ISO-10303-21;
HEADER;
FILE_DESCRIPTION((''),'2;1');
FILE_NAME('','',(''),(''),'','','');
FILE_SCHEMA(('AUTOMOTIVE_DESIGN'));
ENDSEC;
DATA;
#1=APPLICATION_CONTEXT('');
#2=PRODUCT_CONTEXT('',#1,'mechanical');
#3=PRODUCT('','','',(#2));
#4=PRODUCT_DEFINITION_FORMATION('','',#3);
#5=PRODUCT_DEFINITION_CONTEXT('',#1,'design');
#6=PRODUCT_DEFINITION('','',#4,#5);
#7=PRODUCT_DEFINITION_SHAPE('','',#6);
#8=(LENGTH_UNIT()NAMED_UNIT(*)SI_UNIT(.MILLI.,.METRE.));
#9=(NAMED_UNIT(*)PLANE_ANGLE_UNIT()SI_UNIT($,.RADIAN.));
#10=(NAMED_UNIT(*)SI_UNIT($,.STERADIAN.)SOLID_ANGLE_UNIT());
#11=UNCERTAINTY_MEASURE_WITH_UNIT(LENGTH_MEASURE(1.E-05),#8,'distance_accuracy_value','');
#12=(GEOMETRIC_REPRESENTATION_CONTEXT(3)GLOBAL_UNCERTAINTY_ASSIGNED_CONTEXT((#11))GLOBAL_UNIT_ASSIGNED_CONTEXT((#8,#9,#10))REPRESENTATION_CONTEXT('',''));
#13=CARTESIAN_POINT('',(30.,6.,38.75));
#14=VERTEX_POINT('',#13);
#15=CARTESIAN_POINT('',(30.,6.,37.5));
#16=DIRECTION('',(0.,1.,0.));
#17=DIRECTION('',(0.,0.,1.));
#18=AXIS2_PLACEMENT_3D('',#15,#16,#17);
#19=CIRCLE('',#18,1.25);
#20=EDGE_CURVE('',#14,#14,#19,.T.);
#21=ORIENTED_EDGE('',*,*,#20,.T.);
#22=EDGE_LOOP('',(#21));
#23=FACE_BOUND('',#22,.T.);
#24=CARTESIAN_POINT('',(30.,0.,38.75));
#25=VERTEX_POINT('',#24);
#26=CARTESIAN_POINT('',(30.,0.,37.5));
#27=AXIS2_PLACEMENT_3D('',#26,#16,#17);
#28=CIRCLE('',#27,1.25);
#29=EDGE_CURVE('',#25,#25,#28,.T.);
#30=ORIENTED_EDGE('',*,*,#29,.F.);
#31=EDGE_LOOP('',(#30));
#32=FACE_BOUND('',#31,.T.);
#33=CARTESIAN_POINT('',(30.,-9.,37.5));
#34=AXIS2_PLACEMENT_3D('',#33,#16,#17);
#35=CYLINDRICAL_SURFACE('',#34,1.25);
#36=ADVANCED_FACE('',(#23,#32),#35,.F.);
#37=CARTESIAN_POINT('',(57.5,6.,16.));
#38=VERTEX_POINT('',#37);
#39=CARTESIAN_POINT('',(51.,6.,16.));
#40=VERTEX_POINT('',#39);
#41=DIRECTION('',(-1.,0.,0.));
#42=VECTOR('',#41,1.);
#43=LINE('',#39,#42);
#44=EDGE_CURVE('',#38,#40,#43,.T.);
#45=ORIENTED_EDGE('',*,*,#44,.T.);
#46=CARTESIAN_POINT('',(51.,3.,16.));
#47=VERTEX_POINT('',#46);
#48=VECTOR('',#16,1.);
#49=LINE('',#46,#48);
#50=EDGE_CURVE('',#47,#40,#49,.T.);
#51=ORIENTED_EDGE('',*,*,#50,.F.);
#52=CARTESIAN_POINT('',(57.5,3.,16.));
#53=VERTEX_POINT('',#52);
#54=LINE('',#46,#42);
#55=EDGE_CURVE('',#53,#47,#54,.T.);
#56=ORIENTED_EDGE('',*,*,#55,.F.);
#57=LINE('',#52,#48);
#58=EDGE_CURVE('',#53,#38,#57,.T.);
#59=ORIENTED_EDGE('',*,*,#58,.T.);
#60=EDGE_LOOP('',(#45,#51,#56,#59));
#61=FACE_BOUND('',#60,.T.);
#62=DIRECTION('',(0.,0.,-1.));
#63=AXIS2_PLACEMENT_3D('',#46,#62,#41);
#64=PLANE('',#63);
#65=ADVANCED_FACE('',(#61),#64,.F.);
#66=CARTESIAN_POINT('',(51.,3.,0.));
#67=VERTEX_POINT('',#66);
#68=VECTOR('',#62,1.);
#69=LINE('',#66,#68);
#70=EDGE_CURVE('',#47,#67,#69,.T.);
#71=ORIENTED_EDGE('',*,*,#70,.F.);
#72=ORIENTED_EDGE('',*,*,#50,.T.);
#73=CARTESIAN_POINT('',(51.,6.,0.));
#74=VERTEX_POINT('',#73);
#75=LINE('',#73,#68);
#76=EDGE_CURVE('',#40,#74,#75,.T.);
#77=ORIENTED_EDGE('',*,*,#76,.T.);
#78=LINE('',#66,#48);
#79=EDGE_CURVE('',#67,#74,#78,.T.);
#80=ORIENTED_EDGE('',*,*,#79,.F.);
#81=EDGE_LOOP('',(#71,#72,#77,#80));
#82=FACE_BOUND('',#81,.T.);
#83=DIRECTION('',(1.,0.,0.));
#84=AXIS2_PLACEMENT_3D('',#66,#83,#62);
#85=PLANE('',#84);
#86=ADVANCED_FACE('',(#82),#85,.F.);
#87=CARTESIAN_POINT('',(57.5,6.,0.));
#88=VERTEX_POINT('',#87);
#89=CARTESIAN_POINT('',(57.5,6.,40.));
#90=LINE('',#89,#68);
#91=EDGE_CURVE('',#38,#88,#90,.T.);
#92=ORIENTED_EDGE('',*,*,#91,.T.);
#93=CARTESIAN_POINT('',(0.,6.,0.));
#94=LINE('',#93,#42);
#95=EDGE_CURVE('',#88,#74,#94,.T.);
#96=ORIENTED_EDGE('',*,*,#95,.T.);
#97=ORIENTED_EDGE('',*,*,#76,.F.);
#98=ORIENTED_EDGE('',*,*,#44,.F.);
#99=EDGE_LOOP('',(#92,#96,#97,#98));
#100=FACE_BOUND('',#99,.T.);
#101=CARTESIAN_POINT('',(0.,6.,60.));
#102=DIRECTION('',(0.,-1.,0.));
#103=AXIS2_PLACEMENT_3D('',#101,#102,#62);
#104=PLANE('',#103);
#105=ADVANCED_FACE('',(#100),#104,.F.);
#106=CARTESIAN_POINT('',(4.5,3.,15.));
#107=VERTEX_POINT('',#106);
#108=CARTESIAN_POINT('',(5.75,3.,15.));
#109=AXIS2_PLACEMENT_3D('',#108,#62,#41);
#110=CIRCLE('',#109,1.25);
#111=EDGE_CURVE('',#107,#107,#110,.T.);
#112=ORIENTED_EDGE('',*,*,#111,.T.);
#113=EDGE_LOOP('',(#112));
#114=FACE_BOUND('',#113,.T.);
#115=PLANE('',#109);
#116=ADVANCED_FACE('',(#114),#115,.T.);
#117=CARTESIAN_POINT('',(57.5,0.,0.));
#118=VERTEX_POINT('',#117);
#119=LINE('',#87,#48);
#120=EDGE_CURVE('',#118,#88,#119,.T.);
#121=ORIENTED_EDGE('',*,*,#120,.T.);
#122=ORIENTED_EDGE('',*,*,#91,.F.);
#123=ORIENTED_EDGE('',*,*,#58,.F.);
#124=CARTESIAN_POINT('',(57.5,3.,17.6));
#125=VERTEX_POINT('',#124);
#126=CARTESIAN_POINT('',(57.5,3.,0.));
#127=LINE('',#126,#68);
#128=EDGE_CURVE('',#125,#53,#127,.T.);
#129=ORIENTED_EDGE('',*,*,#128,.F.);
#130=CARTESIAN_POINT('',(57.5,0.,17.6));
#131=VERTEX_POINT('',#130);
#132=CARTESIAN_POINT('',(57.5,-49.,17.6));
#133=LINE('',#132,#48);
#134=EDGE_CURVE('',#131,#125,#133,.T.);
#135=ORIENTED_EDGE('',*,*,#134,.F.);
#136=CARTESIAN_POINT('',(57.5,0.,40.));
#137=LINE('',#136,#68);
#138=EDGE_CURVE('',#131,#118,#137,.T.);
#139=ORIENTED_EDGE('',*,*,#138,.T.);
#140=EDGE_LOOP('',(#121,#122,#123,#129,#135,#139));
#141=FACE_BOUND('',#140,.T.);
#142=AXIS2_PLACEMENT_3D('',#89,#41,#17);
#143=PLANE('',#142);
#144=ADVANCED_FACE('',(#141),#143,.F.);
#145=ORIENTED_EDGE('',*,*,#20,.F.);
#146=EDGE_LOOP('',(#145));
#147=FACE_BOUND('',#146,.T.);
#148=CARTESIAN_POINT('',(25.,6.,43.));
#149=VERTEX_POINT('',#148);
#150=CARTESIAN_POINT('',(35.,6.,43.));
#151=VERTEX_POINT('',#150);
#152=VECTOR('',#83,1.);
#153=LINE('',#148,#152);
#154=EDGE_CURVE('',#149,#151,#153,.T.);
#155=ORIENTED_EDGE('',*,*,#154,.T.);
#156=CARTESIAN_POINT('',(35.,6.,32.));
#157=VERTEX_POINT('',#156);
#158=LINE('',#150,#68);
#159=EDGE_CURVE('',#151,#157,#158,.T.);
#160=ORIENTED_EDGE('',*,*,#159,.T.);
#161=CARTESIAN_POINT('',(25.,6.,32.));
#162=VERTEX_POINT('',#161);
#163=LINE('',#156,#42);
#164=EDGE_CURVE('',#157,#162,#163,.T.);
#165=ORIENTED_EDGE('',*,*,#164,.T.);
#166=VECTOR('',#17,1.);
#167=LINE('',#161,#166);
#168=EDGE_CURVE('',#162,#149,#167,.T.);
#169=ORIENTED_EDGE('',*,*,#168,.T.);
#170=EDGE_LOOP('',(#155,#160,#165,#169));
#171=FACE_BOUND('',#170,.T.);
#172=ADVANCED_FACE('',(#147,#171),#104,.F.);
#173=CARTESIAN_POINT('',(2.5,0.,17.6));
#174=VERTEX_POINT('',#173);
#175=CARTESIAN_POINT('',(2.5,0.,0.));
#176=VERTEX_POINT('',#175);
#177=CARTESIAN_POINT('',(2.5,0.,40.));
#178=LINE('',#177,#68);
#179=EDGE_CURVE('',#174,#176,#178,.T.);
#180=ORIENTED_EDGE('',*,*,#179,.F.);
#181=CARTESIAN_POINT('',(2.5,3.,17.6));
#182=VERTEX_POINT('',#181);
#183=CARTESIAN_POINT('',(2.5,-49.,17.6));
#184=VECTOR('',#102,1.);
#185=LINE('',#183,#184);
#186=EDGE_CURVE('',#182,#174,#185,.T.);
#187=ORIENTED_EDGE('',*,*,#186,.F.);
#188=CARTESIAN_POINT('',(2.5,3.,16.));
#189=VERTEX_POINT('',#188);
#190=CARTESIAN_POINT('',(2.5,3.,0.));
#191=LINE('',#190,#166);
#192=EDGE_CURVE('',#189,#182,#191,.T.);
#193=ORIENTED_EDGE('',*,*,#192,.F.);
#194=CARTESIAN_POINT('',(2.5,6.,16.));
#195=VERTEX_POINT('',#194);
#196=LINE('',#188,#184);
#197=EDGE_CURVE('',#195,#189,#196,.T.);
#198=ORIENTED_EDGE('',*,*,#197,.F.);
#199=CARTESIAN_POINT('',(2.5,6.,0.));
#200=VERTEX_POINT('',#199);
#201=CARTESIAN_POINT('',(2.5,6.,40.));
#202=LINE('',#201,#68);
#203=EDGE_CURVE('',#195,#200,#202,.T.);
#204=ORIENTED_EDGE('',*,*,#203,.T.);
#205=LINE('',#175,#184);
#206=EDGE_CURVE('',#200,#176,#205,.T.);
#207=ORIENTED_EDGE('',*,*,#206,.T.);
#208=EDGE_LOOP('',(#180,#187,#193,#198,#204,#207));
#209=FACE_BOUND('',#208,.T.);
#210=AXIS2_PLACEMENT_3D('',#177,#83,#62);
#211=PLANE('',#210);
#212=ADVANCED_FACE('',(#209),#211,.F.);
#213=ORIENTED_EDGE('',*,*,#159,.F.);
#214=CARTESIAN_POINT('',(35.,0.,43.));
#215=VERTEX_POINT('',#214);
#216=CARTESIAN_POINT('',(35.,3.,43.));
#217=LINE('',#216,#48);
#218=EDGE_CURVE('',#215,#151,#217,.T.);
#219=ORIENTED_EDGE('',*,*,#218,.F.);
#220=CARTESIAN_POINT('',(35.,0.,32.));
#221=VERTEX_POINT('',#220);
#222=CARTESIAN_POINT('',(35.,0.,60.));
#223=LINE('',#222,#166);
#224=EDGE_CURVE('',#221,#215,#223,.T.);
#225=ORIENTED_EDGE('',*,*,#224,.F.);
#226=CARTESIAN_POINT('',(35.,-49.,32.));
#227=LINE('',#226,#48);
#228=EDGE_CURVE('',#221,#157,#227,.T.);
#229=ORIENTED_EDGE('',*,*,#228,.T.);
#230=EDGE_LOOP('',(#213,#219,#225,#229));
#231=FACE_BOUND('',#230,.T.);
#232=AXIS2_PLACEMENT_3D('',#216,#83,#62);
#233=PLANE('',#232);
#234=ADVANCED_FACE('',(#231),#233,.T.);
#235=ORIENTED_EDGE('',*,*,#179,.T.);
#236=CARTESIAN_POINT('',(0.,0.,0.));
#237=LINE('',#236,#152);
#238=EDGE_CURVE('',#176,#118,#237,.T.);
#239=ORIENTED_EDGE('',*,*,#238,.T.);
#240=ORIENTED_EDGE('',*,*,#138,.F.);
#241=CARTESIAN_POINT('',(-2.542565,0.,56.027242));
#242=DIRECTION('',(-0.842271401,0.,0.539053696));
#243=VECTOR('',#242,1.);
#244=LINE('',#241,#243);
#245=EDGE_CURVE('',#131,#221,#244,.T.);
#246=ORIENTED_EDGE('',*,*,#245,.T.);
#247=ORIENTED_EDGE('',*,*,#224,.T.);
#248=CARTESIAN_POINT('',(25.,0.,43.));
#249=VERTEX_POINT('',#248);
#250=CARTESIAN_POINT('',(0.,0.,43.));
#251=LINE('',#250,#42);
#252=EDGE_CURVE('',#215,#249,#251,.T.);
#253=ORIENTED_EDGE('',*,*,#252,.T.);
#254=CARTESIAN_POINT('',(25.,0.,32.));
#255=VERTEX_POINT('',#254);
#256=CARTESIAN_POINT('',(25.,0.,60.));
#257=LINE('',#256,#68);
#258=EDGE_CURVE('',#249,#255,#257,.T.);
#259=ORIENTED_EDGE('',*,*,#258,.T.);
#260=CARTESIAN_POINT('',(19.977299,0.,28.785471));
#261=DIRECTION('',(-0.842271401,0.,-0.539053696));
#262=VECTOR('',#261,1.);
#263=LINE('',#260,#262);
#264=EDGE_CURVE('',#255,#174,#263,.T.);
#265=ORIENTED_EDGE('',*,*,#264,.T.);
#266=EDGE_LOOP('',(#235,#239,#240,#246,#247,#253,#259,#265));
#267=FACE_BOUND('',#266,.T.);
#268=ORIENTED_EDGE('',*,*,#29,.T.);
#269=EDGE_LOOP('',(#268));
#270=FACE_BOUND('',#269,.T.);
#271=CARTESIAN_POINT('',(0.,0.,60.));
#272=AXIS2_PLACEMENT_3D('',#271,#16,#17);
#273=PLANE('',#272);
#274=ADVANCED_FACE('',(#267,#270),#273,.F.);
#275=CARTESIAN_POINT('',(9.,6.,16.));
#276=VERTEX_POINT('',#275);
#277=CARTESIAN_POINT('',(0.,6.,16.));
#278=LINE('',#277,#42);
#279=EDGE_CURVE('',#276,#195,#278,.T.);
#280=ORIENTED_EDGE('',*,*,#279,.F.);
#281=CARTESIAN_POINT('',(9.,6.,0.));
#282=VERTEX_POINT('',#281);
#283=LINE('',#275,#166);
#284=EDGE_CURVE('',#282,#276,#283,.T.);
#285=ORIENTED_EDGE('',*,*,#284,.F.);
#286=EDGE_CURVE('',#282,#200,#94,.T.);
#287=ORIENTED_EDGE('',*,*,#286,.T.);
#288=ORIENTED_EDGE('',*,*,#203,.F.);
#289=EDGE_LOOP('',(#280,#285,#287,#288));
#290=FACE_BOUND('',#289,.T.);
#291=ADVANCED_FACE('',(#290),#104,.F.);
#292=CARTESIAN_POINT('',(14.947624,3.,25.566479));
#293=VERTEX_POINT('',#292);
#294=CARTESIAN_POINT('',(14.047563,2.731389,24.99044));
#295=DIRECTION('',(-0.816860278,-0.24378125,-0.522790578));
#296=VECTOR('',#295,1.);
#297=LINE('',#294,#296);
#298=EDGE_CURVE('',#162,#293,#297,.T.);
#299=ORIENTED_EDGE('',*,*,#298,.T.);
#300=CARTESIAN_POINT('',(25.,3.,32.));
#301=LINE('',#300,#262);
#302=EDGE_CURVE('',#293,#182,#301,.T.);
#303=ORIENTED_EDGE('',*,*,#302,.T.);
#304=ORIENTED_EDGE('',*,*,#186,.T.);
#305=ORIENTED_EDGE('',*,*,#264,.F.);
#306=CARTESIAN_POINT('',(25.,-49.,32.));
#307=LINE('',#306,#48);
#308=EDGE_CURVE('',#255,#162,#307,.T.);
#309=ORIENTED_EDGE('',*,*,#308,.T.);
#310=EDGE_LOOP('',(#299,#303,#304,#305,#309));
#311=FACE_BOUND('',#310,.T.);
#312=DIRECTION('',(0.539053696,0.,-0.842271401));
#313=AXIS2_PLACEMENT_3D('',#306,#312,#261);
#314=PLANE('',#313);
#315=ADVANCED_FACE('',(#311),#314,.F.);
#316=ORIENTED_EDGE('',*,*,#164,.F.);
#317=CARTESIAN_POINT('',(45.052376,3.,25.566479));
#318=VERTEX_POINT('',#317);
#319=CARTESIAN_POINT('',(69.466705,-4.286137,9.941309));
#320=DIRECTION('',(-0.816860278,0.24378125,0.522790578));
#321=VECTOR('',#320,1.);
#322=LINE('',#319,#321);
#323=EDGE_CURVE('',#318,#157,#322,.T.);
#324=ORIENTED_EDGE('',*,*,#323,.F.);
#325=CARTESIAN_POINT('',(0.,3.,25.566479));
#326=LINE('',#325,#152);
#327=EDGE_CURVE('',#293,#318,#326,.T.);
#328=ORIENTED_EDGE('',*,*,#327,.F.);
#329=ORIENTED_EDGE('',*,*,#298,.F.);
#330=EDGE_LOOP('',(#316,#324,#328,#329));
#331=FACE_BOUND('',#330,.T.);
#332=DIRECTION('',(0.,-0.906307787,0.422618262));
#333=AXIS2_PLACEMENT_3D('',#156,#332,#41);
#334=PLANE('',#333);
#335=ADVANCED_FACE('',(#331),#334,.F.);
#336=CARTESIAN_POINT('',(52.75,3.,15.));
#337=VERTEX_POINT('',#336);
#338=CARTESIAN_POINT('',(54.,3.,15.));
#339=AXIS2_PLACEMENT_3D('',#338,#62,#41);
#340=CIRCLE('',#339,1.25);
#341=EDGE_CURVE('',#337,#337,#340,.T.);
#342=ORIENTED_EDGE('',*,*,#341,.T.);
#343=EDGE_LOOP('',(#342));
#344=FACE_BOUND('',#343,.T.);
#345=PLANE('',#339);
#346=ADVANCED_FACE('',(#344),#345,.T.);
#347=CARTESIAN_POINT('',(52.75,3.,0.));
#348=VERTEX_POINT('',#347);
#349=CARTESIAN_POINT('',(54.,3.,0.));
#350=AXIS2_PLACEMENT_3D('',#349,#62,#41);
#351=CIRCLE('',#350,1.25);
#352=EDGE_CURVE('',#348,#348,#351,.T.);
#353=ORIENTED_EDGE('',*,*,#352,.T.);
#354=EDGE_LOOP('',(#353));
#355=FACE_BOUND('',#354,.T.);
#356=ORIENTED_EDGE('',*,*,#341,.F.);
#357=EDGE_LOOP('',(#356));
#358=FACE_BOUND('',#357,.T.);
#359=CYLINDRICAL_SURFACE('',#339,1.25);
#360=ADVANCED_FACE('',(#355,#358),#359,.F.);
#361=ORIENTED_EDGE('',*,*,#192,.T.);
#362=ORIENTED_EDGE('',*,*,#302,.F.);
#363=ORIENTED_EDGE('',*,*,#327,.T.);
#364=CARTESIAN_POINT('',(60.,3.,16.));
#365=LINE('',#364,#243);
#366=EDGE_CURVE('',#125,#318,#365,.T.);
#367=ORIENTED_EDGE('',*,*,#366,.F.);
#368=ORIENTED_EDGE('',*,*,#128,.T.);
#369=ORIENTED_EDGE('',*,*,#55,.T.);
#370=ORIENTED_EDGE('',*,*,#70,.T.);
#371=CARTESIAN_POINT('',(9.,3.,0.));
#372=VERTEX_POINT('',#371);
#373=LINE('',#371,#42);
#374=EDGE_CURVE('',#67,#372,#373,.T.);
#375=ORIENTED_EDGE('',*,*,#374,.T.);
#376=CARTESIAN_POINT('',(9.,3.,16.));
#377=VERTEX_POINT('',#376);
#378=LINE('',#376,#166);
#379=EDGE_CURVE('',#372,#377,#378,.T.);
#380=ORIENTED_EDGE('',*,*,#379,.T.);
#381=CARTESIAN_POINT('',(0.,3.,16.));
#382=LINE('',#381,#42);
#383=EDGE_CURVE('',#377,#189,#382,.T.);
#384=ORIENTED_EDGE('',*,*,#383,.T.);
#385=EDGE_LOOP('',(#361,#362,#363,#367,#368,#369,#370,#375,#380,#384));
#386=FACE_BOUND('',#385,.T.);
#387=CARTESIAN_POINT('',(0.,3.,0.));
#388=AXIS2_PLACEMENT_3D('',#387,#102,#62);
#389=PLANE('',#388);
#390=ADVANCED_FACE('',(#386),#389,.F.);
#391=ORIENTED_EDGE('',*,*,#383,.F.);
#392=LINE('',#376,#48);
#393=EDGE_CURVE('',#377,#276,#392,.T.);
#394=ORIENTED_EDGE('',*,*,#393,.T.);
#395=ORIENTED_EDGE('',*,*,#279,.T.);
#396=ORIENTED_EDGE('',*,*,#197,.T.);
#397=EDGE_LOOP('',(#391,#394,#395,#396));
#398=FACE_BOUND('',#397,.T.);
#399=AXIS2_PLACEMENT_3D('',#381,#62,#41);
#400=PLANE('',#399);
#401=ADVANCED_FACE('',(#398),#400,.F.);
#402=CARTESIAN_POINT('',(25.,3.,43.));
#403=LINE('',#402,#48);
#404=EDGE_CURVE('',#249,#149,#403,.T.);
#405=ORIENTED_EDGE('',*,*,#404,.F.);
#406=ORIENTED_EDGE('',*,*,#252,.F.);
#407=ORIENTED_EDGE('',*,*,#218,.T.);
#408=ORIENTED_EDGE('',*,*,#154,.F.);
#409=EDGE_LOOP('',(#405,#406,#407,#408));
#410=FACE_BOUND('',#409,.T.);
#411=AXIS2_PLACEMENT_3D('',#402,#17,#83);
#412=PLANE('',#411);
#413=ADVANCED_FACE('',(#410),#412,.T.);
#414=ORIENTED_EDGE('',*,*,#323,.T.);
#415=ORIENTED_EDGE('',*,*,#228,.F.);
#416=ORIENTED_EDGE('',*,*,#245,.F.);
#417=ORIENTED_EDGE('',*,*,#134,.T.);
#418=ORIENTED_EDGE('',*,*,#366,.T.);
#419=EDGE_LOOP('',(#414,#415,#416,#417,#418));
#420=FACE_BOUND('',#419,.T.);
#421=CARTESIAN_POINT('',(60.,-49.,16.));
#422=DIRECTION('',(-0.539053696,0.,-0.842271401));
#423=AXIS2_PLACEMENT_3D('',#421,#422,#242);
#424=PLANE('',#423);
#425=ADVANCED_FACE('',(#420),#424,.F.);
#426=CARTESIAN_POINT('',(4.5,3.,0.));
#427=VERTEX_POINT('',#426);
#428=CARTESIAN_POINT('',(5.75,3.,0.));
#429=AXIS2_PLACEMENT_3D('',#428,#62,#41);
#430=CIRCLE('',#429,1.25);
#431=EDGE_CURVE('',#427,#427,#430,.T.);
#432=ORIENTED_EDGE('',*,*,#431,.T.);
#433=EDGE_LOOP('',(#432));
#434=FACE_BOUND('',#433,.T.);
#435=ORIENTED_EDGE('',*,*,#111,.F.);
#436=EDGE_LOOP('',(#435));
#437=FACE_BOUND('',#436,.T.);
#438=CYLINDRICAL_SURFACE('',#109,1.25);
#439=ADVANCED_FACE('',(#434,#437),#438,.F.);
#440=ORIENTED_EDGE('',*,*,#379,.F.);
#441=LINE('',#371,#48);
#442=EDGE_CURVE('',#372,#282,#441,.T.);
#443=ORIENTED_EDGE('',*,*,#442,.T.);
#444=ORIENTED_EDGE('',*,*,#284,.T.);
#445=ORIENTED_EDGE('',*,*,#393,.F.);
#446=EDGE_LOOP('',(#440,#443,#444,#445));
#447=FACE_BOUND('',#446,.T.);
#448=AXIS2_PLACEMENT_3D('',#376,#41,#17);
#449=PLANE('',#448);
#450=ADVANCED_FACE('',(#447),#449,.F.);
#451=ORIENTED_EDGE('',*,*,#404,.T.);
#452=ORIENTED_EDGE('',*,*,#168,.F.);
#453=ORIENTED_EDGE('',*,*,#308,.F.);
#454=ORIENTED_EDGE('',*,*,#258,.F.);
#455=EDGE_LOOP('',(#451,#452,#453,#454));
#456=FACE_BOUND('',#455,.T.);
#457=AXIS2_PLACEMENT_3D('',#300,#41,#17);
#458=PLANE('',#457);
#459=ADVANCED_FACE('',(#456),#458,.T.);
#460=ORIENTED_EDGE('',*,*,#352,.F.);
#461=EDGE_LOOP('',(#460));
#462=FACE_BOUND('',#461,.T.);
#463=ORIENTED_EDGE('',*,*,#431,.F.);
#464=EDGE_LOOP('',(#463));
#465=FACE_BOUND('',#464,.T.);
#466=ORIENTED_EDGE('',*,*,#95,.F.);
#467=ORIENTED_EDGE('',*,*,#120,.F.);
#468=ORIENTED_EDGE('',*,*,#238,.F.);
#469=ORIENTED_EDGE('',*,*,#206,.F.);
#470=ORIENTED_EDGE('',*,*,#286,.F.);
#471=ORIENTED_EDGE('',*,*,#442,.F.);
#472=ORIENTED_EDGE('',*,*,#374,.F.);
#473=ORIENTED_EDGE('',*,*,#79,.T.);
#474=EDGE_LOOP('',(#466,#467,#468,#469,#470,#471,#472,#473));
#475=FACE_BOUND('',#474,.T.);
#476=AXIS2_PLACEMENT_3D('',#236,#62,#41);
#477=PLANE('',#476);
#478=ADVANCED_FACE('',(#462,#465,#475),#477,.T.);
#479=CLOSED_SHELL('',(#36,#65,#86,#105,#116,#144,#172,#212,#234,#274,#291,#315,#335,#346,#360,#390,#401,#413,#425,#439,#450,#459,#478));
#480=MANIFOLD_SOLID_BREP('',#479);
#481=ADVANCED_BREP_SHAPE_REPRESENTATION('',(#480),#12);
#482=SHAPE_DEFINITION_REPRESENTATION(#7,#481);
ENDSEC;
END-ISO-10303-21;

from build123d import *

# Parameters (mm, degrees)
ESQUISSE1_W             = 60
ESQUISSE1_H             = 6
BOSS_EXTRU_1_DEPTH      = 60
ESQUISSE2_R             = 1.25
ENL_V_MAT_EXTRU_1_DEPTH = 15
ESQUISSE3_R             = 1.25
ENL_V_MAT_EXTRU_2_DEPTH = 15
ESQUISSE4_W             = 10
ESQUISSE4_H             = 11
ENL_V_MAT_EXTRU_3_DEPTH = 3
ENL_V_MAT_EXTRU_4_DEPTH = 52
CHANFREIN1_SIZE2        = 6.433520762
CHANFREIN1_SIZE         = 3
ESQUISSE6_W             = 2.5
ESQUISSE6_H             = 6
ENL_V_MAT_EXTRU_5_DEPTH = 40


with BuildPart() as part:
    # Esquisse1 → Boss.-Extru.1 (new body)
    with BuildSketch(Plane.XY):
        with Locations((30, 3)):
            Rectangle(ESQUISSE1_W, ESQUISSE1_H)
    extrude(amount=BOSS_EXTRU_1_DEPTH)

    # Esquisse2 → Enlèv. mat.-Extru.1 (cut)
    with BuildSketch(Plane(origin=(0, 0, 0), x_dir=(-1, 0, 0), z_dir=(0, 0, -1))):
        with Locations((-54, 3)):
            Circle(ESQUISSE2_R)
        with Locations((-5.75, 3)):
            Circle(ESQUISSE2_R)
    extrude(amount=-ENL_V_MAT_EXTRU_1_DEPTH, mode=Mode.SUBTRACT)

    # Esquisse3 → Enlèv. mat.-Extru.2 (cut)
    with BuildSketch(Plane(origin=(0, 6, 0), x_dir=(1, 0, 0), z_dir=(0, 1, 0))):
        with Locations(Location((30, -37.5, 0), (0, 0, 270))):
            Circle(ESQUISSE3_R)
    extrude(amount=-ENL_V_MAT_EXTRU_2_DEPTH, mode=Mode.SUBTRACT)

    # Esquisse4 → Enlèv. mat.-Extru.3 (cut)
    with BuildSketch(Plane(origin=(0, 6, 0), x_dir=(1, 0, 0), z_dir=(0, 1, 0))):
        Polygon((0, -16), (9, -16), (9, 0), (51, 0), (51, -16), (60, -16), (60, -60), (0, -60), align=None)
        with Locations((30, -37.5)):
            Rectangle(ESQUISSE4_W, ESQUISSE4_H, mode=Mode.SUBTRACT)
    extrude(amount=-ENL_V_MAT_EXTRU_3_DEPTH, mode=Mode.SUBTRACT)

    # Esquisse5 → Enlèv. mat.-Extru.4 (cut)
    with BuildSketch(Plane(origin=(0, 3, 0), x_dir=(1, 0, 0), z_dir=(0, 1, 0))):
        Polygon((60, -16), (35, -32), (35, -43), (25, -43), (25, -32), (0, -16), (-21.594855386, -85.475485762), (75.414479662, -69.930764824), align=None)
    extrude(amount=-ENL_V_MAT_EXTRU_4_DEPTH, mode=Mode.SUBTRACT)

    # Chanfrein1
    chanfrein1_edges = [part.edges().sort_by_distance(p)[0] for p in [
        (30, 3, 32),
    ]]
    chanfrein1_side = [part.faces().sort_by_distance(p)[0] for p in [
        (30, 3.06, 32),
    ]]
    chamfer(chanfrein1_edges, length=CHANFREIN1_SIZE - 0.0001, length2=CHANFREIN1_SIZE2 - 0.0001, reference=chanfrein1_side[0])  # a hair under: the kernel refuses the full size

    # Esquisse6 → Enlèv. mat.-Extru.5 (cut)
    with BuildSketch(Plane(origin=(0, 0, 0), x_dir=(-1, 0, 0), z_dir=(0, 0, -1))):
        with Locations((-58.75, 3)):
            Rectangle(ESQUISSE6_W, ESQUISSE6_H)
        with Locations((-1.25, 3)):
            Rectangle(ESQUISSE6_W, ESQUISSE6_H)
    extrude(amount=-ENL_V_MAT_EXTRU_5_DEPTH, mode=Mode.SUBTRACT)


solid = part.part
